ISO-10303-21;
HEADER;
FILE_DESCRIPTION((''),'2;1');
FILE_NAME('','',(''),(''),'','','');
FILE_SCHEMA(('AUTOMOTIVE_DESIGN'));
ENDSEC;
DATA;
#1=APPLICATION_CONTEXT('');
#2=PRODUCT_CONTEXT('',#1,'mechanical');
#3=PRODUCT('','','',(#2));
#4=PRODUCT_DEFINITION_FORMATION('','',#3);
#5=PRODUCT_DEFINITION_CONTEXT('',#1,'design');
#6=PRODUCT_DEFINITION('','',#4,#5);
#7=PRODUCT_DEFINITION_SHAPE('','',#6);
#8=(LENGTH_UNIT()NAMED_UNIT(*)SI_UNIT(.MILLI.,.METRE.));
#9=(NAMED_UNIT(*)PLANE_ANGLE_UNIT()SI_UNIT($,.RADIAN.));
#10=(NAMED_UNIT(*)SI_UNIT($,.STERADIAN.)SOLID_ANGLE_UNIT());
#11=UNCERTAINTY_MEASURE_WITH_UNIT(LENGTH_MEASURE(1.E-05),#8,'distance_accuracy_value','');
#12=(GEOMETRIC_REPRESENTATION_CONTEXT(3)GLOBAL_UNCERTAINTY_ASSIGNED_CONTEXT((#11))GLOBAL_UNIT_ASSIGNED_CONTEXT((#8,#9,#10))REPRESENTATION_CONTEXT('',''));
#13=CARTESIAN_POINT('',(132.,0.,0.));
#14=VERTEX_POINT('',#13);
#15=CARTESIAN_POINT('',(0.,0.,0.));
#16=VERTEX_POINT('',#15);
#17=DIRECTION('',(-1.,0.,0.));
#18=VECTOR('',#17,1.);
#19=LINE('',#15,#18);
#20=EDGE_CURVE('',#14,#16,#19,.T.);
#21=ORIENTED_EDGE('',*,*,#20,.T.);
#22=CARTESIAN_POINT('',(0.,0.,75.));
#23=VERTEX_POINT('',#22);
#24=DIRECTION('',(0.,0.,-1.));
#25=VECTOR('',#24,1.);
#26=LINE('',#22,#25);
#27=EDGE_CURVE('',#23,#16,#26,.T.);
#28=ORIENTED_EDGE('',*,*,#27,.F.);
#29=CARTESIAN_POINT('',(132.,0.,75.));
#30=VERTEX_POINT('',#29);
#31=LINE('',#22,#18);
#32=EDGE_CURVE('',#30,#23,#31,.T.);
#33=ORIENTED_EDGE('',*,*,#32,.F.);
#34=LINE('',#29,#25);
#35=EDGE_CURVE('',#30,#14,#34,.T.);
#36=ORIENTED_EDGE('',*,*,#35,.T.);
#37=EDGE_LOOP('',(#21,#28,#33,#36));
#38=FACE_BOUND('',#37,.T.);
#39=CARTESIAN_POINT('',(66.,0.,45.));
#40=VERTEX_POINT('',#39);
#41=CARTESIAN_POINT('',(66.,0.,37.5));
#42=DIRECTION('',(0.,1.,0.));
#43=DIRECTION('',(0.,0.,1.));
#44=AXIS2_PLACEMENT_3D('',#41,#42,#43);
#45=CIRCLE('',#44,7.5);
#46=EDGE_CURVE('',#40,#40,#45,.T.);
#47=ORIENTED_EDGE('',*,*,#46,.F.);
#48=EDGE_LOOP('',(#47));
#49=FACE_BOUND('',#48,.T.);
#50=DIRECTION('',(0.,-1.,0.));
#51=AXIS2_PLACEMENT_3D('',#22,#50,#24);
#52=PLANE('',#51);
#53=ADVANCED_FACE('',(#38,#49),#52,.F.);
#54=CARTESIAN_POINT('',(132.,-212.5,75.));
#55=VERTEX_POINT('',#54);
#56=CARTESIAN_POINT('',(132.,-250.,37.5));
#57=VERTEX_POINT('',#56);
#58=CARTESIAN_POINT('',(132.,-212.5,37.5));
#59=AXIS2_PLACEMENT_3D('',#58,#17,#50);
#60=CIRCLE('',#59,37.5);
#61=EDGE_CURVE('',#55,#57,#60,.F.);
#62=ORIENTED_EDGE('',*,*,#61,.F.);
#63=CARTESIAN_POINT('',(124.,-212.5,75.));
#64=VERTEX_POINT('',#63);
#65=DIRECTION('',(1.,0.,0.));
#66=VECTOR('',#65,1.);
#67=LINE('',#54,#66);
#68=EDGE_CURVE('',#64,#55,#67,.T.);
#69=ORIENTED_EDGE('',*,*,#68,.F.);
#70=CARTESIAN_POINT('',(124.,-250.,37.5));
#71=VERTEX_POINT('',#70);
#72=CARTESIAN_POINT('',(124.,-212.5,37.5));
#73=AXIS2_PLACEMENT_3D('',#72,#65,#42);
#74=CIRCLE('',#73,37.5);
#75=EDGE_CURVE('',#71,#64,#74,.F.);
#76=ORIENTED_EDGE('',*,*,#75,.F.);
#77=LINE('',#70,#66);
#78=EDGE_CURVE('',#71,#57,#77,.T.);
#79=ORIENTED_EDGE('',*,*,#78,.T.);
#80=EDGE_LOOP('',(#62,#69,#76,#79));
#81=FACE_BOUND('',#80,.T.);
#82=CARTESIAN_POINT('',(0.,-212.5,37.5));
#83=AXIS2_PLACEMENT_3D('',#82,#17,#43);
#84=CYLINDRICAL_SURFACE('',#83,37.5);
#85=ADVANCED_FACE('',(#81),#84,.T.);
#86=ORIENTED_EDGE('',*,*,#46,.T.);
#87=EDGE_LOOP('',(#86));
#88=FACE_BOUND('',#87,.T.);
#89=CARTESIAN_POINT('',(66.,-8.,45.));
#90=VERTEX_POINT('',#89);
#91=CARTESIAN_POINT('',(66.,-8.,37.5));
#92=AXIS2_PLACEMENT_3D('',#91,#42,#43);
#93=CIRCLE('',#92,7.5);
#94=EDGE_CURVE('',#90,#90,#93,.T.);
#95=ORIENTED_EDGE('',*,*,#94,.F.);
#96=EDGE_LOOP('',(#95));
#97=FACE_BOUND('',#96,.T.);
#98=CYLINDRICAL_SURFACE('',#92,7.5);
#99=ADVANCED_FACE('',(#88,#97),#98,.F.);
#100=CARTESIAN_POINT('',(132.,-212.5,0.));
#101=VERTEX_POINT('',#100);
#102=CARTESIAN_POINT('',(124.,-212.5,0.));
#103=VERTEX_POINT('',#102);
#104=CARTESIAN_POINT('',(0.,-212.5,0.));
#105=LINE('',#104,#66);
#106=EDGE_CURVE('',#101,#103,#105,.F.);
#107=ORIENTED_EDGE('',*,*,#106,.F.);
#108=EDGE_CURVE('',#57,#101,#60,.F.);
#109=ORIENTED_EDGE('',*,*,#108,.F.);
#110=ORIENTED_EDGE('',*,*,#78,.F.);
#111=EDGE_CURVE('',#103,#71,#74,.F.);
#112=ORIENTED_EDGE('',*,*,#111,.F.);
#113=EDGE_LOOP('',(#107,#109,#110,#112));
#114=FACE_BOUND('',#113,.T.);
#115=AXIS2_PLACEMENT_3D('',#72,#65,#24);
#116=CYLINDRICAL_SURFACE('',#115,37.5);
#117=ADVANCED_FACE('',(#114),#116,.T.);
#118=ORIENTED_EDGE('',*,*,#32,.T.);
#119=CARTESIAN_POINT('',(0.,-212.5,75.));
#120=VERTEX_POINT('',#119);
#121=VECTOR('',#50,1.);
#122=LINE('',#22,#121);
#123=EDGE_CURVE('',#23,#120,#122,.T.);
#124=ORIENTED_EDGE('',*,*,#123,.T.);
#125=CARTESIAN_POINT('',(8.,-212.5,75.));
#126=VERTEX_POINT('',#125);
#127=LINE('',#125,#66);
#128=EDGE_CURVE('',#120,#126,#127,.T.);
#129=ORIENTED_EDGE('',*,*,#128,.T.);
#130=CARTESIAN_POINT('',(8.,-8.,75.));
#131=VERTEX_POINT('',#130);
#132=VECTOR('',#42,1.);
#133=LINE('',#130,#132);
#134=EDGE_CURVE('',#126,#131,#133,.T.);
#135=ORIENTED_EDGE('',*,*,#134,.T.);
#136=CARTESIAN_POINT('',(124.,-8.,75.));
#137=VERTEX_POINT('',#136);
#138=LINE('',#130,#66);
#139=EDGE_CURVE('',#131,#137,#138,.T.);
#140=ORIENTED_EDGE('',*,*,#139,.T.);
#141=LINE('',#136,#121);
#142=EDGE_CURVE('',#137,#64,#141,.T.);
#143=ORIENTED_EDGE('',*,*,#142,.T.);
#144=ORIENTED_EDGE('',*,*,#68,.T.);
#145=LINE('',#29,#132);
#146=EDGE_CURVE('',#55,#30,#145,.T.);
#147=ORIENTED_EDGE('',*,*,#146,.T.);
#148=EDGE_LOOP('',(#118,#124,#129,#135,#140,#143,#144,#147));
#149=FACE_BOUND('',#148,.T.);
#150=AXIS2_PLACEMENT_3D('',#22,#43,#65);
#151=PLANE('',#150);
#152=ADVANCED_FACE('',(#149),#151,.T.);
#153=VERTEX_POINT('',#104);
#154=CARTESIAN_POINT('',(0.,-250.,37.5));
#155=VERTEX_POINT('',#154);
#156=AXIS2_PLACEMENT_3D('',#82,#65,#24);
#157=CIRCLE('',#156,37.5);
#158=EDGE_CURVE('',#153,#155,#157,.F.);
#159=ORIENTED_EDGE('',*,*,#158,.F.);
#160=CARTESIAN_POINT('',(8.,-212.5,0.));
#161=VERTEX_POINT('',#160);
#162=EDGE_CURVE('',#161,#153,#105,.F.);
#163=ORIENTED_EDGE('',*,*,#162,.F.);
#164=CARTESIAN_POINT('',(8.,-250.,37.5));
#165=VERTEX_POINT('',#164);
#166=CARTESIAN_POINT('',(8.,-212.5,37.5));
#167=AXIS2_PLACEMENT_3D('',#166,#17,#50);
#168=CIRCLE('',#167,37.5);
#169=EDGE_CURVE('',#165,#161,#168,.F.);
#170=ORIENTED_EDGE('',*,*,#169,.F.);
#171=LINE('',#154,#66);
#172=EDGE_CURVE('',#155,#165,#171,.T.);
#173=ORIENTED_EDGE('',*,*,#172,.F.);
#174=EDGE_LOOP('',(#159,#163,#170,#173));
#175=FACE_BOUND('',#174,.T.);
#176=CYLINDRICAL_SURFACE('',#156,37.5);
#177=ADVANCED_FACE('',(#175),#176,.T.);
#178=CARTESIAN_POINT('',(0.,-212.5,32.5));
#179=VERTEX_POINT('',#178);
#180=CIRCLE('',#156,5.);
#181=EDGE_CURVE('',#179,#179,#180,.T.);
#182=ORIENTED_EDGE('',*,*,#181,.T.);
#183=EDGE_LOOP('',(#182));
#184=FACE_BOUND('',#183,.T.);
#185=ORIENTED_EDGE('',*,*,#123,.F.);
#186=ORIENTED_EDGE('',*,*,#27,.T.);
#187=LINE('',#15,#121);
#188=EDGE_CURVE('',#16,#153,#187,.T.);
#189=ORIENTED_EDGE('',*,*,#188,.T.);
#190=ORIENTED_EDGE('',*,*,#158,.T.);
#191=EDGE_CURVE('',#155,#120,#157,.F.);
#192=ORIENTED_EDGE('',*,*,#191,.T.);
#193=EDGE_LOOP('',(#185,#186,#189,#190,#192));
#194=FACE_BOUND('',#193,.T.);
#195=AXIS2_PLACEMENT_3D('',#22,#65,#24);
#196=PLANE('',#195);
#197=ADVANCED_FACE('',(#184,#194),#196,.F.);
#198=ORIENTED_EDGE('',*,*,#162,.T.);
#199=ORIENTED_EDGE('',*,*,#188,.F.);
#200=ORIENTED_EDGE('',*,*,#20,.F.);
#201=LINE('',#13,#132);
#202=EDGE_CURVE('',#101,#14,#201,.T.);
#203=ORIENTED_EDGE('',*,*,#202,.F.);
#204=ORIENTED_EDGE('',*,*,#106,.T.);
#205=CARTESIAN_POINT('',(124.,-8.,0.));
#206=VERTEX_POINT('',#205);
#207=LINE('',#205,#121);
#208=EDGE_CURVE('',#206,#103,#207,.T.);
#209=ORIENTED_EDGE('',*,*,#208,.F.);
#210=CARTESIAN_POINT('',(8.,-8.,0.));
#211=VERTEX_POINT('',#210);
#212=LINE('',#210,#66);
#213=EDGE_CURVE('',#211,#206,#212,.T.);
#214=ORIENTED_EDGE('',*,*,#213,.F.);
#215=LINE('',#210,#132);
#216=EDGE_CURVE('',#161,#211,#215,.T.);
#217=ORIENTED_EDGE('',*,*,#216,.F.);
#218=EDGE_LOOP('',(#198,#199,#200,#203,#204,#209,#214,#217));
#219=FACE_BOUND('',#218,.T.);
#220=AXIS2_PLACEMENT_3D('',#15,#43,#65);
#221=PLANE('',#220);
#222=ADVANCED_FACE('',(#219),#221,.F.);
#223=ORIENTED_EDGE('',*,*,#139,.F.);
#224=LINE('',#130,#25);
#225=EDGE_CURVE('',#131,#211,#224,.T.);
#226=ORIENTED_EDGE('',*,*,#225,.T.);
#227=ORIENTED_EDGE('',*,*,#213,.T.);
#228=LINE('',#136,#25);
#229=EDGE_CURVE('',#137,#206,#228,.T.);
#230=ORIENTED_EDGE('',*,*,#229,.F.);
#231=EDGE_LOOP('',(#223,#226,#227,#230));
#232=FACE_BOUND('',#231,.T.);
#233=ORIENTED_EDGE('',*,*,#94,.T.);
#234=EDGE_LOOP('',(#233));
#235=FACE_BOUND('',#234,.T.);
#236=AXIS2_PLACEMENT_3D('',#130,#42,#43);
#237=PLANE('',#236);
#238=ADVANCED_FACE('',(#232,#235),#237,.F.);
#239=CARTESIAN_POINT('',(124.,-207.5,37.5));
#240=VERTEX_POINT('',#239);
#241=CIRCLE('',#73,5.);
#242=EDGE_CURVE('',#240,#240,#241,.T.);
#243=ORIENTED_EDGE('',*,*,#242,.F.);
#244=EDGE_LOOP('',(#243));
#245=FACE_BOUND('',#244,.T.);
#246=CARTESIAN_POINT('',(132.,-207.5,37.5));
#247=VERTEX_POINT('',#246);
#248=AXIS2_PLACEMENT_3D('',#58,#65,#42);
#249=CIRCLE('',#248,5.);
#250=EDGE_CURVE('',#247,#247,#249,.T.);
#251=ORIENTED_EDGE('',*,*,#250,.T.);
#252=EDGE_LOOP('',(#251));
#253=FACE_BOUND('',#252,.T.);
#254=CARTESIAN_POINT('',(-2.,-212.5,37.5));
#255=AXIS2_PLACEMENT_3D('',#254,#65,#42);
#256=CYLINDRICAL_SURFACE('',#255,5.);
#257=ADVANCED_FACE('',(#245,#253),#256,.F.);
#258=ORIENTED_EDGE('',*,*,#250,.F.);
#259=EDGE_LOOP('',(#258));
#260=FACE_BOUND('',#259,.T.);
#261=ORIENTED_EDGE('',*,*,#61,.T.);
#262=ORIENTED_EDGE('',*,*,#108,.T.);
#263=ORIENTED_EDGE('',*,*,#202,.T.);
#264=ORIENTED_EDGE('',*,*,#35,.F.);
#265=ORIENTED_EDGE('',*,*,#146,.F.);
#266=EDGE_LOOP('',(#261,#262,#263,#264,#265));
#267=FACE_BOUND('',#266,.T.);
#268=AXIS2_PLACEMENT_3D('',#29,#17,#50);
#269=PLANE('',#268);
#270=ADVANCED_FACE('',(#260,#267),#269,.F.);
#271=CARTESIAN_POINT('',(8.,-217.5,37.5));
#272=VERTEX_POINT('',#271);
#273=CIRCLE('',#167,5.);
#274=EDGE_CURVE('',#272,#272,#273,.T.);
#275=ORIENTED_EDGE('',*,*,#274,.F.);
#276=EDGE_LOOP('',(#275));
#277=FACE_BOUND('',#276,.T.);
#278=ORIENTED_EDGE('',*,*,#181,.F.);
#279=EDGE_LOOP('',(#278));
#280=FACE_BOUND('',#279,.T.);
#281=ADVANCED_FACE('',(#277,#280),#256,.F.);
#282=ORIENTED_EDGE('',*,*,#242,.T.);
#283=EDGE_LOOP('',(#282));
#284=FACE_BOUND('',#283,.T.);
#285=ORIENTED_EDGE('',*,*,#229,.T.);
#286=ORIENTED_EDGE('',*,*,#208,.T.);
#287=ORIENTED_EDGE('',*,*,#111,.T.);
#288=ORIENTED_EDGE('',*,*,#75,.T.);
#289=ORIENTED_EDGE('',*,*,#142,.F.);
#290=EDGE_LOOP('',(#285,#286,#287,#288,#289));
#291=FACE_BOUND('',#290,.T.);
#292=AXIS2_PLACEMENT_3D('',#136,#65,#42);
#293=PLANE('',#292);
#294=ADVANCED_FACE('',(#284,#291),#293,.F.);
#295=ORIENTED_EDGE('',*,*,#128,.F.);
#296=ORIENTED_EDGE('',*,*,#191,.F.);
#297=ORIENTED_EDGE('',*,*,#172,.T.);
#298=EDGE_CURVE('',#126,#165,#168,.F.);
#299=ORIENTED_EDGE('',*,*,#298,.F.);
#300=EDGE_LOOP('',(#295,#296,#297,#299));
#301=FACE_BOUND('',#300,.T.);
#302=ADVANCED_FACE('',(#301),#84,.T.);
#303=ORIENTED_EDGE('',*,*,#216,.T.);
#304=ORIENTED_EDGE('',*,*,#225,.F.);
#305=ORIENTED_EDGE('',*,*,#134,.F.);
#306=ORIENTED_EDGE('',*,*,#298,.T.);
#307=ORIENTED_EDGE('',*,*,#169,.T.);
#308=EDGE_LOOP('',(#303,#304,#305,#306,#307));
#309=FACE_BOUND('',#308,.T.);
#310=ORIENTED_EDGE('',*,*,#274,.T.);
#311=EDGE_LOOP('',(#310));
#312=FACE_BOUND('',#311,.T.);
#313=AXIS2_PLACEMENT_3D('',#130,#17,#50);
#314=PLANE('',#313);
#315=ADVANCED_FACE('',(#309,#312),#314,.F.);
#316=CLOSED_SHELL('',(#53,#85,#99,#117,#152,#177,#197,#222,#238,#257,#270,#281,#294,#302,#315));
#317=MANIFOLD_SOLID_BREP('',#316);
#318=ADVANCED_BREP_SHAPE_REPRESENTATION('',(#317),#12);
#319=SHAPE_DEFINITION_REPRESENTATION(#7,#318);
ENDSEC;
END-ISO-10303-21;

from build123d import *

# Parameters (mm, degrees)
BOSS_EXTRUDE1_DEPTH = 75
SKETCH2_R           = 7.5
CUT_EXTRUDE1_DEPTH  = 8
SKETCH3_R           = 5
CUT_EXTRUDE2_DEPTH  = 134
FILLET1_R           = 37.5


with BuildPart() as part:
    # Sketch1 → Boss-Extrude1 (new body)
    with BuildSketch(Plane.XY):
        Polygon((124, -250), (132, -250), (132, 0), (0, 0), (0, -250), (8, -250), (8, -8), (124, -8), align=None)
    extrude(amount=BOSS_EXTRUDE1_DEPTH)

    # Sketch2 → Cut-Extrude1 (cut)
    with BuildSketch(Plane(origin=(0, 0, 0), x_dir=(1, 0, 0), z_dir=(0, 1, 0))):
        with Locations(Location((66, -37.5, 0), (0, 0, 270))):
            Circle(SKETCH2_R)
    extrude(amount=-CUT_EXTRUDE1_DEPTH, mode=Mode.SUBTRACT)

    # Sketch3 → Cut-Extrude2 (cut)
    with BuildSketch(Plane(origin=(132, 0, 0), x_dir=(0, 0, -1), z_dir=(1, 0, 0))):
        with Locations(Location((-37.5, -212.5, 0), (0, 0, 90))):
            Circle(SKETCH3_R)
    extrude(amount=-CUT_EXTRUDE2_DEPTH, mode=Mode.SUBTRACT)

    # Fillet1
    fillet1_edges = [part.edges().sort_by_distance(p)[0] for p in [
        (128, -250, 75),
        (4, -250, 75),
        (4, -250, 0),
        (128, -250, 0),
    ]]
    fillet(fillet1_edges, radius=FILLET1_R - 0.0001)  # a hair under: the kernel refuses the full size


solid = part.part
